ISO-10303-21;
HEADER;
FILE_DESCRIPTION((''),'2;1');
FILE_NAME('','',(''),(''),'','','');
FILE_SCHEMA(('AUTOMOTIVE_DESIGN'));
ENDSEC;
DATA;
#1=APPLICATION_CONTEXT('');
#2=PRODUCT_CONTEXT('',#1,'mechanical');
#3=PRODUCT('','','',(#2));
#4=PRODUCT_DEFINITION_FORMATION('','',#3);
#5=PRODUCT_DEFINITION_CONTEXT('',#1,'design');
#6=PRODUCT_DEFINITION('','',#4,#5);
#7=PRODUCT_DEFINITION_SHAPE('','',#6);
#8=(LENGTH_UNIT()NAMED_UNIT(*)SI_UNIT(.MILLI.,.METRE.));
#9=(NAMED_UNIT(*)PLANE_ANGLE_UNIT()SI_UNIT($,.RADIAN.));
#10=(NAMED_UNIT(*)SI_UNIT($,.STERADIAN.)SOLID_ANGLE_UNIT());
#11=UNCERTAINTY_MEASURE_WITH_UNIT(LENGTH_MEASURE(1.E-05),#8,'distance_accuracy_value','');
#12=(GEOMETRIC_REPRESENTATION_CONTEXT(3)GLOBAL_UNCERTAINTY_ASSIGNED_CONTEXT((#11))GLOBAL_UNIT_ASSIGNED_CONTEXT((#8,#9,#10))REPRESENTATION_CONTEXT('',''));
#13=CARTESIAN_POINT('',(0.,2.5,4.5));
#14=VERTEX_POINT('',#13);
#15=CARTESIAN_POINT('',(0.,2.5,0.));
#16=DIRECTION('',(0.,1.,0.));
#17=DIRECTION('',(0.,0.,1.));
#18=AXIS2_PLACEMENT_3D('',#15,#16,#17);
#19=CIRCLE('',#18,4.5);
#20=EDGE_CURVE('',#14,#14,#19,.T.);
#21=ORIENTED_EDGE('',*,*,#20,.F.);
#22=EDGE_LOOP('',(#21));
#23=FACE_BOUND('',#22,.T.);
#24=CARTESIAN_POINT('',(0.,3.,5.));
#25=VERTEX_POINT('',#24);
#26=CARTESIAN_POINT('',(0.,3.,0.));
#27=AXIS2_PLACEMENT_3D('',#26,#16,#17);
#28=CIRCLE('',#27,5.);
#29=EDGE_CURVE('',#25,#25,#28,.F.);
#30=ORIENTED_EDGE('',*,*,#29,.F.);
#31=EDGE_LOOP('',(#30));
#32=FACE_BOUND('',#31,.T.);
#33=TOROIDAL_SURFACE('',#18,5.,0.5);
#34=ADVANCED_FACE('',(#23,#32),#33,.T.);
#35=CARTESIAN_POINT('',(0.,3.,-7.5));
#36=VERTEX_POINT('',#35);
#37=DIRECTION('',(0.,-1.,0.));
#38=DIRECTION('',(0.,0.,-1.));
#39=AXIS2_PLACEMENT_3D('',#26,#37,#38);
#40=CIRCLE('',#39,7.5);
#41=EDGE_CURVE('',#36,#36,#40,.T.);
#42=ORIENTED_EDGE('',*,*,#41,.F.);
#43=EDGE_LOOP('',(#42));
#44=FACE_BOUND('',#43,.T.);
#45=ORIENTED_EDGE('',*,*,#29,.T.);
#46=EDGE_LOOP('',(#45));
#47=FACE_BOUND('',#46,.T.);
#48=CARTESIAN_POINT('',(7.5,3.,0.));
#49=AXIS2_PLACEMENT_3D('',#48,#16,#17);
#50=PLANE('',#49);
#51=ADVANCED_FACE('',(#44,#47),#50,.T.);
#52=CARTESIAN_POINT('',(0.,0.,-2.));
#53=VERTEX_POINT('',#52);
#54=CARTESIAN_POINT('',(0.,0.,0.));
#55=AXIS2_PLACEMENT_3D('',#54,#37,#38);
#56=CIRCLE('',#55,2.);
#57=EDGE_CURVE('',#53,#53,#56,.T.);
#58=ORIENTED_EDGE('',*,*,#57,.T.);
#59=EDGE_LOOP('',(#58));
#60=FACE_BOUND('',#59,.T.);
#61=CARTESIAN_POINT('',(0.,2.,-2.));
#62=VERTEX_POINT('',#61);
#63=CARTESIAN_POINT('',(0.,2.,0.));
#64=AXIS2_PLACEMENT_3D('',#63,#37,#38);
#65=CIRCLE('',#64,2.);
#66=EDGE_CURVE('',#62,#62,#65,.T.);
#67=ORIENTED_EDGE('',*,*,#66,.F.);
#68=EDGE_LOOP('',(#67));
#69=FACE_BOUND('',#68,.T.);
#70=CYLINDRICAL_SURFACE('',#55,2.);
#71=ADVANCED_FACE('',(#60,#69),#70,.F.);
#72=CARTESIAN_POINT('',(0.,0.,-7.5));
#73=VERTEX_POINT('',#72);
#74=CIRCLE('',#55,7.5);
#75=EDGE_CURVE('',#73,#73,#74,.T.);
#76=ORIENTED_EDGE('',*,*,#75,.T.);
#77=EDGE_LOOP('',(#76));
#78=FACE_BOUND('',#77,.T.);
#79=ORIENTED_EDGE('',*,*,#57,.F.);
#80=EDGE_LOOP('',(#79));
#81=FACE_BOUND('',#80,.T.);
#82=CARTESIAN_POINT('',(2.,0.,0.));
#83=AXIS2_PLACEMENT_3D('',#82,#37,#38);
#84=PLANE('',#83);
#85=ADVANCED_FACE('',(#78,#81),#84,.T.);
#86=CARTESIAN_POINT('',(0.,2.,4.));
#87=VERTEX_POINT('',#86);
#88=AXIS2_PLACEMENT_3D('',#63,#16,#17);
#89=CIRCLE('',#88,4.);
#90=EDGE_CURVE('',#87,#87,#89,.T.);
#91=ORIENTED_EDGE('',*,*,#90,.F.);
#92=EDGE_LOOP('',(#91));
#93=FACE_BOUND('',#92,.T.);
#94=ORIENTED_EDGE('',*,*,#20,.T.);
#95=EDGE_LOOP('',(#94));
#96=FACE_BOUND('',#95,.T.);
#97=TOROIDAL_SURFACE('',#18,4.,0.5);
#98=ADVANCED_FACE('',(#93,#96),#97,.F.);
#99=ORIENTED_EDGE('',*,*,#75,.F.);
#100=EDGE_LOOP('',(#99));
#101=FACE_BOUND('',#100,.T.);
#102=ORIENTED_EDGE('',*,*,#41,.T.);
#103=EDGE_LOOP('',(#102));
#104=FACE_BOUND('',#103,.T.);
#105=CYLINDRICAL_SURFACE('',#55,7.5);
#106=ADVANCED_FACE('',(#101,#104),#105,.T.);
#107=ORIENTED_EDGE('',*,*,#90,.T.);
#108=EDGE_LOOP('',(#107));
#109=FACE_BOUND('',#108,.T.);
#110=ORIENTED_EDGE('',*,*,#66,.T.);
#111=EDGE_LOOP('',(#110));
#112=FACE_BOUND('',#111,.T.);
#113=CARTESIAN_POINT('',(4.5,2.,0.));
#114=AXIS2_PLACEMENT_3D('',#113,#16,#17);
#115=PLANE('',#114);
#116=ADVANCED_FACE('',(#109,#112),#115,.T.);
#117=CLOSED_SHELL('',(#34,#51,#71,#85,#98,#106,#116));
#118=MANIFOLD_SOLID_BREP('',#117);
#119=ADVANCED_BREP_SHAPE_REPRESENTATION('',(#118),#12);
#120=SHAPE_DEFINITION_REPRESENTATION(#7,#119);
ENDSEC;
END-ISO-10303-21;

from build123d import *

# Parameters (mm, degrees)
FILLET_1_R = 0.5


with BuildPart() as part:
    # 草图2 → 旋转1 (revolve)
    with BuildSketch(Plane.XY, mode=Mode.PRIVATE) as revolve_1_sk:
        Polygon((2, 0), (7.5, 0), (7.5, 3), (4.5, 3), (4.5, 2), (2, 2), align=None)
    revolve(revolve_1_sk.sketch.rotate(Axis((0, 0, 0), (0, 1, 0)), 90), axis=Axis((0, 0, 0), (0, 1, 0)))

    # 圆角1
    fillet_1_edges = [part.edges().sort_by_distance(p)[0] for p in [
        (0, 2, 4.5),
        (0, 3, 4.5),
    ]]
    fillet(fillet_1_edges, radius=FILLET_1_R - 0.0001)  # a hair under: the kernel refuses the full size


solid = part.part
